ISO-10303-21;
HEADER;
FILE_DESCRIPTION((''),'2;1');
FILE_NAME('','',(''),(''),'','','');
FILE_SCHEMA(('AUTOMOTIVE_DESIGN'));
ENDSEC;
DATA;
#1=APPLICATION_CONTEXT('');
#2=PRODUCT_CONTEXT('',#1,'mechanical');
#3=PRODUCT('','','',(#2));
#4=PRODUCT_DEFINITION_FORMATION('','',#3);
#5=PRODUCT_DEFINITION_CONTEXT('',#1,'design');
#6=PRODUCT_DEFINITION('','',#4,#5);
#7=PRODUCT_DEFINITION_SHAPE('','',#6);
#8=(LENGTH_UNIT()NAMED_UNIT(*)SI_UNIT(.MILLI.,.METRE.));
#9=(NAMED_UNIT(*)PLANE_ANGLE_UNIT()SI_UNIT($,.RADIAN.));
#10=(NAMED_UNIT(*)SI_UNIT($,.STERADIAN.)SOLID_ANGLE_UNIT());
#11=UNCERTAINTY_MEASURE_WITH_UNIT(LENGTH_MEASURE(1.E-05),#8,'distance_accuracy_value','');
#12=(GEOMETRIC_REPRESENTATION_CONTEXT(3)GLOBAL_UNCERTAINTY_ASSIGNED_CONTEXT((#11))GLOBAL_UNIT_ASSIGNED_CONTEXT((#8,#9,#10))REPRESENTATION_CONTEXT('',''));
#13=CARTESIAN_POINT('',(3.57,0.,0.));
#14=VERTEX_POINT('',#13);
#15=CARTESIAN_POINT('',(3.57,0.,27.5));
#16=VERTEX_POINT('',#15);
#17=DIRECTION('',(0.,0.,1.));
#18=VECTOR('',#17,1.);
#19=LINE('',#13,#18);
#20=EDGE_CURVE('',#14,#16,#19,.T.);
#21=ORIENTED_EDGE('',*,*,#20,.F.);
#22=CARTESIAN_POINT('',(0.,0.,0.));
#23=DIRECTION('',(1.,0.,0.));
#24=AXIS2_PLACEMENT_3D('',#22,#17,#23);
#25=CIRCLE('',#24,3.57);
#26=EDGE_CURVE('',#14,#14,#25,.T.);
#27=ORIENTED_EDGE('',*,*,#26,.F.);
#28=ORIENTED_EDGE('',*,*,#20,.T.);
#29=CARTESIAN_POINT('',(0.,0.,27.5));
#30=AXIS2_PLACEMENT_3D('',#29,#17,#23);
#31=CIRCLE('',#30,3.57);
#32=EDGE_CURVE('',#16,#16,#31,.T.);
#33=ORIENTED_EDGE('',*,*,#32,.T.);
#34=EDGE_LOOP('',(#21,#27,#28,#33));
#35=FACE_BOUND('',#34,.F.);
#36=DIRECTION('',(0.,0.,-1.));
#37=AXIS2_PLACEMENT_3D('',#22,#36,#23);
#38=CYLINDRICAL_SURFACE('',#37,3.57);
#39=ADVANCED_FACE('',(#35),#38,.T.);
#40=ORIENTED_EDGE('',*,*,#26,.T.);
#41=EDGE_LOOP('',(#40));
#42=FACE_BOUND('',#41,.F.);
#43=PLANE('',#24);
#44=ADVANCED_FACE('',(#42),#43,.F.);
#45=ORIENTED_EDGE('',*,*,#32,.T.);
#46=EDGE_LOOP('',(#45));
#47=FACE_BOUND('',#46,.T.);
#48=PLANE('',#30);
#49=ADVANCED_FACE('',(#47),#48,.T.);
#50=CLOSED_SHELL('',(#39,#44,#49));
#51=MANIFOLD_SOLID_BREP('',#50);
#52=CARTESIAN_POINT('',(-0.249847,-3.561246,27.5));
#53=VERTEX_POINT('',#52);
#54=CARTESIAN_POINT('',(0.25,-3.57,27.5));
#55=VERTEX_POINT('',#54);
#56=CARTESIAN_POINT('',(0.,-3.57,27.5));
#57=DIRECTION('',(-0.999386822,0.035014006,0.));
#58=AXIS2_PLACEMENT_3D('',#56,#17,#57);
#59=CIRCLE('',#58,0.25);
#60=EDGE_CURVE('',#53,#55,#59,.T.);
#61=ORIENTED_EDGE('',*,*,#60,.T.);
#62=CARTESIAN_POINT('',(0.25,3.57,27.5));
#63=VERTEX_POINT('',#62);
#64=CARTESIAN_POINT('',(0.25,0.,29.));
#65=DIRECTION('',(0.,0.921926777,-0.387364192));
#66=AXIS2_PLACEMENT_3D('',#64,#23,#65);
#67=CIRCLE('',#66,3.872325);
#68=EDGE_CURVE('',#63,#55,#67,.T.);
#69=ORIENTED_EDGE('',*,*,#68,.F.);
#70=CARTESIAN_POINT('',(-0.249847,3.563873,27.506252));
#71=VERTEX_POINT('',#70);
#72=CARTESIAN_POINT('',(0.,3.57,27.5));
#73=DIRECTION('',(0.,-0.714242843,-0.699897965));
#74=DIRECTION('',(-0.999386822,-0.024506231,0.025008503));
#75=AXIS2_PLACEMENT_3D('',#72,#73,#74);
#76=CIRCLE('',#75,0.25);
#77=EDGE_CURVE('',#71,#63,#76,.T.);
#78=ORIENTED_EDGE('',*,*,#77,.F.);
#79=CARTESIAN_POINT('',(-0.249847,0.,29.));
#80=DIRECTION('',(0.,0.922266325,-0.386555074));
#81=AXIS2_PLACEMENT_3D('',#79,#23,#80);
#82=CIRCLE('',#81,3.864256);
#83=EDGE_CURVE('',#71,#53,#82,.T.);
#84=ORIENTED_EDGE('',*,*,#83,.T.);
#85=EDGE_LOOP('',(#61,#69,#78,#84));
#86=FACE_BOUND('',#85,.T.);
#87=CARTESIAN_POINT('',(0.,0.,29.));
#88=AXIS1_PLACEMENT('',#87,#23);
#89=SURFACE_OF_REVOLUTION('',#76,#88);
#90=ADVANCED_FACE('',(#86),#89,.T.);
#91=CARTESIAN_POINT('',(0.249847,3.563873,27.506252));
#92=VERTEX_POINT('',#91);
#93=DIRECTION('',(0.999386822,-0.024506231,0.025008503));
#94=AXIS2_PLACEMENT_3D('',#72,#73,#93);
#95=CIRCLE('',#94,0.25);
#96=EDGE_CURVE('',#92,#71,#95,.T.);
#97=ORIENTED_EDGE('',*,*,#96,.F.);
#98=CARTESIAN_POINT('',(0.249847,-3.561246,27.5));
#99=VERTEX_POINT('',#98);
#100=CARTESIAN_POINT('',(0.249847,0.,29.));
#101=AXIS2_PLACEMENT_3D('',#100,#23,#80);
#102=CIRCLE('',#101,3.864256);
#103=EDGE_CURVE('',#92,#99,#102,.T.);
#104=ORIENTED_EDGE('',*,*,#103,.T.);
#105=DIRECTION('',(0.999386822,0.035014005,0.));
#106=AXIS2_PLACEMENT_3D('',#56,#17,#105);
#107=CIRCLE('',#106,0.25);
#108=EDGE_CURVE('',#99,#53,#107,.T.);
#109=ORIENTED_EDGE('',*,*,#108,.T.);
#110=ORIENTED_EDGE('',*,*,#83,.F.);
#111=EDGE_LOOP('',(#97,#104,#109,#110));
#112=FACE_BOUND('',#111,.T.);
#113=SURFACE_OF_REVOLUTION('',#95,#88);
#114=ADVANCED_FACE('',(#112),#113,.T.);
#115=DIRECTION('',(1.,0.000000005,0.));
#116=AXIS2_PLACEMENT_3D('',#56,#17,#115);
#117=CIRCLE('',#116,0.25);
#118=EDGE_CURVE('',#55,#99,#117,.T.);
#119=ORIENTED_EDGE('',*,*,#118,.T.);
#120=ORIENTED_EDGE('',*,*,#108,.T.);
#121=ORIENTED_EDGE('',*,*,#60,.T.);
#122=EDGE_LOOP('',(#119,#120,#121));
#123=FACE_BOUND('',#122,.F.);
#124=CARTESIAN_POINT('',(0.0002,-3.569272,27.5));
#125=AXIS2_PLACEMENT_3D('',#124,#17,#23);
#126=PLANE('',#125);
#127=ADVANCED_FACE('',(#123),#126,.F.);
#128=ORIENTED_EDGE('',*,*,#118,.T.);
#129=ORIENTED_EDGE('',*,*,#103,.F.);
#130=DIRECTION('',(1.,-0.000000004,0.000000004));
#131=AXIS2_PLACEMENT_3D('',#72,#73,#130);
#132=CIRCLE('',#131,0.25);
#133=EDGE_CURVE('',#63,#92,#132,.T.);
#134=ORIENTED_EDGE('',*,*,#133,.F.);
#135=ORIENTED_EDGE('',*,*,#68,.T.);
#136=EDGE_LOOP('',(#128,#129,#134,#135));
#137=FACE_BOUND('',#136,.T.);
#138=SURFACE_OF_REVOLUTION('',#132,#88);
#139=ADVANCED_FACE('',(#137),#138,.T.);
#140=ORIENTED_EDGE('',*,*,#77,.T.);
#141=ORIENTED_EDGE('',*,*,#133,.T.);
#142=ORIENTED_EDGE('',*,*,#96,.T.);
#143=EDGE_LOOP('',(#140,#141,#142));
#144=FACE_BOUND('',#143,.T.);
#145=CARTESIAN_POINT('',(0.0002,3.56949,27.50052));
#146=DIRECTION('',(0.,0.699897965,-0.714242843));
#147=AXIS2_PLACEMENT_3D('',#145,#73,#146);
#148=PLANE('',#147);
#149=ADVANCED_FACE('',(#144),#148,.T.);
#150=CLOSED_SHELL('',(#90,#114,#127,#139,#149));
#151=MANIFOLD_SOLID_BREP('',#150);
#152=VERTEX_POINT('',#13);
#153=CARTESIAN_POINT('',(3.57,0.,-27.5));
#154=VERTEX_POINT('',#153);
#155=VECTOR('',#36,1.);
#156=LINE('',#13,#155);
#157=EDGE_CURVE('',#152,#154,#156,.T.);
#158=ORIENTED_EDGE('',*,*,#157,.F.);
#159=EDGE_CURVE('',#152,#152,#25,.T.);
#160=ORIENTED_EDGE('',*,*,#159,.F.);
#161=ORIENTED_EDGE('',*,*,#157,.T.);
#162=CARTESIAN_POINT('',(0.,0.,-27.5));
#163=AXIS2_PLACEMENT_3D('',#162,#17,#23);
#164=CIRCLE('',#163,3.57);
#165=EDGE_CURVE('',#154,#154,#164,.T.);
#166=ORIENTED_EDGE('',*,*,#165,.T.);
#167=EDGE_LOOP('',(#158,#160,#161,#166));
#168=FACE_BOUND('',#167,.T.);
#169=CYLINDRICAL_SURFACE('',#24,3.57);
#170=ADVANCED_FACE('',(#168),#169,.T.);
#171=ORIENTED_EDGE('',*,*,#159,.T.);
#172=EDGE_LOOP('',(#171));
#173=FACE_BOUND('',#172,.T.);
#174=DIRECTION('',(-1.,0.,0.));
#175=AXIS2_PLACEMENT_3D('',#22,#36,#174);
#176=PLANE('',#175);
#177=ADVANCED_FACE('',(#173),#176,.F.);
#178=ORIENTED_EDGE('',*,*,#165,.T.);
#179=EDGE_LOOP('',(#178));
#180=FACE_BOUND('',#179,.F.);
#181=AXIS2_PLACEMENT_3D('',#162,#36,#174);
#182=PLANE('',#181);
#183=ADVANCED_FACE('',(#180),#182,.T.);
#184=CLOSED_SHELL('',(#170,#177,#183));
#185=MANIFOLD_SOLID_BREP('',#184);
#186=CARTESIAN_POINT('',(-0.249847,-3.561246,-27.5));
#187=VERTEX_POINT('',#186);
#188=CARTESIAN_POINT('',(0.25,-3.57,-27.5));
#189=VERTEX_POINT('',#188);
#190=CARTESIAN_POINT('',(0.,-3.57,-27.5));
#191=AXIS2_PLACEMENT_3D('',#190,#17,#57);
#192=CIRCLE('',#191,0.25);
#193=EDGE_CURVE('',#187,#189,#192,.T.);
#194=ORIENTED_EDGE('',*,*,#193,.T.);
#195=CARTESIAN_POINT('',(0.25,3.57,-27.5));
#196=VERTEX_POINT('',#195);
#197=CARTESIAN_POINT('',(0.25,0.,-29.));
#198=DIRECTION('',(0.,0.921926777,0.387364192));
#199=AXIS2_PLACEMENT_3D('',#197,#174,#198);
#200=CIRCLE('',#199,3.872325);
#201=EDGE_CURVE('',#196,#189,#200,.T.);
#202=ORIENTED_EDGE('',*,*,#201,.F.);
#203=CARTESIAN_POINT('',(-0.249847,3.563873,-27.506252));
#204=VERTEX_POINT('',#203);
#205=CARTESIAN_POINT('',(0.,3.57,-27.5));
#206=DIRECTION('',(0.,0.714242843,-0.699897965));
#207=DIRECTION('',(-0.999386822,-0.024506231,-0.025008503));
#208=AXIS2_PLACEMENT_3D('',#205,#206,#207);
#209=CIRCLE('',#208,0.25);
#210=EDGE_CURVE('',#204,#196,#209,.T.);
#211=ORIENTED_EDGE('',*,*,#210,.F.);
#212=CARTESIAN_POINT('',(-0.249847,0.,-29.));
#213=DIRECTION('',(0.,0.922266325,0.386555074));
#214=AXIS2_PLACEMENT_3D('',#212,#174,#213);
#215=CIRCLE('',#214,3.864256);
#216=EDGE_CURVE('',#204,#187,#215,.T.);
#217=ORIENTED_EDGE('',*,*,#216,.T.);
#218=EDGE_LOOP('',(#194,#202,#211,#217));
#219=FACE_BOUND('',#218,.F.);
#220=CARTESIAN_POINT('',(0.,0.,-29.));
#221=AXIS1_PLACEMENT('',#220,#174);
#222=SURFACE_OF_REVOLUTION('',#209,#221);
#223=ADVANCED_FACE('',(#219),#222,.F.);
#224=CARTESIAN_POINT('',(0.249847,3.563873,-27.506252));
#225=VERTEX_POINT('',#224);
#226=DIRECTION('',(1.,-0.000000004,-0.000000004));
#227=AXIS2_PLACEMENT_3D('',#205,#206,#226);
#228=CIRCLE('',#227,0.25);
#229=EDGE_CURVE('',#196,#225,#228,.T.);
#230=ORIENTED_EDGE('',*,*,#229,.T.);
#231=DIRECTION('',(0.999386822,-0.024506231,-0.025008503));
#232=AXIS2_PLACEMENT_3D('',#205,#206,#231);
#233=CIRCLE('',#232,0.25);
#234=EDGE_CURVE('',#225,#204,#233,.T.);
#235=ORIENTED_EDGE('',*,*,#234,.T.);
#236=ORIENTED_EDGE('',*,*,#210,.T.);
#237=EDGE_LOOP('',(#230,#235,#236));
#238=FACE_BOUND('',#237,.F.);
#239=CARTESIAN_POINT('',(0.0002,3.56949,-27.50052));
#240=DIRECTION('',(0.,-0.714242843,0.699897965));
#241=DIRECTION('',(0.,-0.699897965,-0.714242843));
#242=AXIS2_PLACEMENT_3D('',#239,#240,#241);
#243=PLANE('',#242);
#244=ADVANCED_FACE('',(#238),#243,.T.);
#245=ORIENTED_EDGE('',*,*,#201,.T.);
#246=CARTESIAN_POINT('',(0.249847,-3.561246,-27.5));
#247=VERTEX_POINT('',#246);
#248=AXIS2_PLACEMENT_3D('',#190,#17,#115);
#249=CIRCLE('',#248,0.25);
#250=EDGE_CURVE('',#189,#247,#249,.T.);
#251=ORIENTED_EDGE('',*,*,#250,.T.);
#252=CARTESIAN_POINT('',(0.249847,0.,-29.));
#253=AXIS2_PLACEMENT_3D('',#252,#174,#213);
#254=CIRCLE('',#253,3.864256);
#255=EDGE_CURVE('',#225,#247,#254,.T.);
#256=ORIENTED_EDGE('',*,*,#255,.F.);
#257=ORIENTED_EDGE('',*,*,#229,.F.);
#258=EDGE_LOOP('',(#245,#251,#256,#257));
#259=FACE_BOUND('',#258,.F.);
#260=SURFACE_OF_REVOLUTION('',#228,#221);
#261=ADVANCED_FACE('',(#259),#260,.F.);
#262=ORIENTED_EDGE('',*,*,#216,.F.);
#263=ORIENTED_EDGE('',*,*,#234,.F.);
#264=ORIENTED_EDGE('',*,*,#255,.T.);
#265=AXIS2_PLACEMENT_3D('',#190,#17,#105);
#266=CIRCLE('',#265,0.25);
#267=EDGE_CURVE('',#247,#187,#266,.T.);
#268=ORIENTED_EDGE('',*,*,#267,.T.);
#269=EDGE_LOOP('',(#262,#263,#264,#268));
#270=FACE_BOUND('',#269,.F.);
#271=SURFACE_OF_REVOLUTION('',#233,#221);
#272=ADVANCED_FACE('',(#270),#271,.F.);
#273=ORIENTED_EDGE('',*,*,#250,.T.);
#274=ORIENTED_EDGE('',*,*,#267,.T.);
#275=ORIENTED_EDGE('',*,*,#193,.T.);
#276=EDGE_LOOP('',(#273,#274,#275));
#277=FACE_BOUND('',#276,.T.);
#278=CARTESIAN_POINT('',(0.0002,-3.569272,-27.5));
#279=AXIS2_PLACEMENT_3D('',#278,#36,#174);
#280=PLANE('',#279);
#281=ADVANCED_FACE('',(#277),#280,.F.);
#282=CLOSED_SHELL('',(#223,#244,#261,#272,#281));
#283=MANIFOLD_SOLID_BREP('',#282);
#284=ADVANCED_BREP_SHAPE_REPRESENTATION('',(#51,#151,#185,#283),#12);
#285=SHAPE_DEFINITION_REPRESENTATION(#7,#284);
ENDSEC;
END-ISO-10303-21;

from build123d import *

# Parameters (mm, degrees)
F0_R     = 3.57
F1_DEPTH = 27.5


# Not quite as in the source:
# - the program builds the solid bodies; features that only make, move or delete a surface that nothing else refers to are left out


with BuildPart() as f1:
    # F0 (on Top) → F1 (new body)
    with BuildSketch(Plane.XY):
        Circle(F0_R)
    extrude(amount=F1_DEPTH)


with BuildPart() as f4:
    # F4: sweep along a path in F2
    with BuildLine(Plane.YZ) as f4_path:
        ThreePointArc((3.57, 27.5), (0, 32.8723248831), (-3.57, 27.5))
    # F3 (on face) → F4 (sweep)
    with BuildSketch(Plane.XY.offset(27.5)):
        with BuildLine():
            ThreePointArc((-0.2498467054, -3.5612464986), (-0.0043774218, -3.8199616734), (0.25, -3.57))
            ThreePointArc((0.25, -3.57), (0.2499616734, -3.5656225782), (0.2498467054, -3.5612464986))
            ThreePointArc((0.2498467054, -3.5612464986), (0, -3.57), (-0.2498467054, -3.5612464986))
        make_face()
        with BuildLine():
            ThreePointArc((-0.2498467054, -3.5612464986), (0, -3.57), (0.2498467054, -3.5612464986))
            ThreePointArc((0.2498467054, -3.5612464986), (0, -3.32), (-0.2498467054, -3.5612464986))
        make_face()
    sweep(path=f4_path.line)


with BuildPart() as f5_1:
    # F5: instance of F4
    add(f4.part.mirror(Plane.XY))


with BuildPart() as f5_2:
    # F5: instance of F1
    add(f1.part.mirror(Plane.XY))


solid = Compound([f1.part, f4.part, f5_1.part, f5_2.part])
